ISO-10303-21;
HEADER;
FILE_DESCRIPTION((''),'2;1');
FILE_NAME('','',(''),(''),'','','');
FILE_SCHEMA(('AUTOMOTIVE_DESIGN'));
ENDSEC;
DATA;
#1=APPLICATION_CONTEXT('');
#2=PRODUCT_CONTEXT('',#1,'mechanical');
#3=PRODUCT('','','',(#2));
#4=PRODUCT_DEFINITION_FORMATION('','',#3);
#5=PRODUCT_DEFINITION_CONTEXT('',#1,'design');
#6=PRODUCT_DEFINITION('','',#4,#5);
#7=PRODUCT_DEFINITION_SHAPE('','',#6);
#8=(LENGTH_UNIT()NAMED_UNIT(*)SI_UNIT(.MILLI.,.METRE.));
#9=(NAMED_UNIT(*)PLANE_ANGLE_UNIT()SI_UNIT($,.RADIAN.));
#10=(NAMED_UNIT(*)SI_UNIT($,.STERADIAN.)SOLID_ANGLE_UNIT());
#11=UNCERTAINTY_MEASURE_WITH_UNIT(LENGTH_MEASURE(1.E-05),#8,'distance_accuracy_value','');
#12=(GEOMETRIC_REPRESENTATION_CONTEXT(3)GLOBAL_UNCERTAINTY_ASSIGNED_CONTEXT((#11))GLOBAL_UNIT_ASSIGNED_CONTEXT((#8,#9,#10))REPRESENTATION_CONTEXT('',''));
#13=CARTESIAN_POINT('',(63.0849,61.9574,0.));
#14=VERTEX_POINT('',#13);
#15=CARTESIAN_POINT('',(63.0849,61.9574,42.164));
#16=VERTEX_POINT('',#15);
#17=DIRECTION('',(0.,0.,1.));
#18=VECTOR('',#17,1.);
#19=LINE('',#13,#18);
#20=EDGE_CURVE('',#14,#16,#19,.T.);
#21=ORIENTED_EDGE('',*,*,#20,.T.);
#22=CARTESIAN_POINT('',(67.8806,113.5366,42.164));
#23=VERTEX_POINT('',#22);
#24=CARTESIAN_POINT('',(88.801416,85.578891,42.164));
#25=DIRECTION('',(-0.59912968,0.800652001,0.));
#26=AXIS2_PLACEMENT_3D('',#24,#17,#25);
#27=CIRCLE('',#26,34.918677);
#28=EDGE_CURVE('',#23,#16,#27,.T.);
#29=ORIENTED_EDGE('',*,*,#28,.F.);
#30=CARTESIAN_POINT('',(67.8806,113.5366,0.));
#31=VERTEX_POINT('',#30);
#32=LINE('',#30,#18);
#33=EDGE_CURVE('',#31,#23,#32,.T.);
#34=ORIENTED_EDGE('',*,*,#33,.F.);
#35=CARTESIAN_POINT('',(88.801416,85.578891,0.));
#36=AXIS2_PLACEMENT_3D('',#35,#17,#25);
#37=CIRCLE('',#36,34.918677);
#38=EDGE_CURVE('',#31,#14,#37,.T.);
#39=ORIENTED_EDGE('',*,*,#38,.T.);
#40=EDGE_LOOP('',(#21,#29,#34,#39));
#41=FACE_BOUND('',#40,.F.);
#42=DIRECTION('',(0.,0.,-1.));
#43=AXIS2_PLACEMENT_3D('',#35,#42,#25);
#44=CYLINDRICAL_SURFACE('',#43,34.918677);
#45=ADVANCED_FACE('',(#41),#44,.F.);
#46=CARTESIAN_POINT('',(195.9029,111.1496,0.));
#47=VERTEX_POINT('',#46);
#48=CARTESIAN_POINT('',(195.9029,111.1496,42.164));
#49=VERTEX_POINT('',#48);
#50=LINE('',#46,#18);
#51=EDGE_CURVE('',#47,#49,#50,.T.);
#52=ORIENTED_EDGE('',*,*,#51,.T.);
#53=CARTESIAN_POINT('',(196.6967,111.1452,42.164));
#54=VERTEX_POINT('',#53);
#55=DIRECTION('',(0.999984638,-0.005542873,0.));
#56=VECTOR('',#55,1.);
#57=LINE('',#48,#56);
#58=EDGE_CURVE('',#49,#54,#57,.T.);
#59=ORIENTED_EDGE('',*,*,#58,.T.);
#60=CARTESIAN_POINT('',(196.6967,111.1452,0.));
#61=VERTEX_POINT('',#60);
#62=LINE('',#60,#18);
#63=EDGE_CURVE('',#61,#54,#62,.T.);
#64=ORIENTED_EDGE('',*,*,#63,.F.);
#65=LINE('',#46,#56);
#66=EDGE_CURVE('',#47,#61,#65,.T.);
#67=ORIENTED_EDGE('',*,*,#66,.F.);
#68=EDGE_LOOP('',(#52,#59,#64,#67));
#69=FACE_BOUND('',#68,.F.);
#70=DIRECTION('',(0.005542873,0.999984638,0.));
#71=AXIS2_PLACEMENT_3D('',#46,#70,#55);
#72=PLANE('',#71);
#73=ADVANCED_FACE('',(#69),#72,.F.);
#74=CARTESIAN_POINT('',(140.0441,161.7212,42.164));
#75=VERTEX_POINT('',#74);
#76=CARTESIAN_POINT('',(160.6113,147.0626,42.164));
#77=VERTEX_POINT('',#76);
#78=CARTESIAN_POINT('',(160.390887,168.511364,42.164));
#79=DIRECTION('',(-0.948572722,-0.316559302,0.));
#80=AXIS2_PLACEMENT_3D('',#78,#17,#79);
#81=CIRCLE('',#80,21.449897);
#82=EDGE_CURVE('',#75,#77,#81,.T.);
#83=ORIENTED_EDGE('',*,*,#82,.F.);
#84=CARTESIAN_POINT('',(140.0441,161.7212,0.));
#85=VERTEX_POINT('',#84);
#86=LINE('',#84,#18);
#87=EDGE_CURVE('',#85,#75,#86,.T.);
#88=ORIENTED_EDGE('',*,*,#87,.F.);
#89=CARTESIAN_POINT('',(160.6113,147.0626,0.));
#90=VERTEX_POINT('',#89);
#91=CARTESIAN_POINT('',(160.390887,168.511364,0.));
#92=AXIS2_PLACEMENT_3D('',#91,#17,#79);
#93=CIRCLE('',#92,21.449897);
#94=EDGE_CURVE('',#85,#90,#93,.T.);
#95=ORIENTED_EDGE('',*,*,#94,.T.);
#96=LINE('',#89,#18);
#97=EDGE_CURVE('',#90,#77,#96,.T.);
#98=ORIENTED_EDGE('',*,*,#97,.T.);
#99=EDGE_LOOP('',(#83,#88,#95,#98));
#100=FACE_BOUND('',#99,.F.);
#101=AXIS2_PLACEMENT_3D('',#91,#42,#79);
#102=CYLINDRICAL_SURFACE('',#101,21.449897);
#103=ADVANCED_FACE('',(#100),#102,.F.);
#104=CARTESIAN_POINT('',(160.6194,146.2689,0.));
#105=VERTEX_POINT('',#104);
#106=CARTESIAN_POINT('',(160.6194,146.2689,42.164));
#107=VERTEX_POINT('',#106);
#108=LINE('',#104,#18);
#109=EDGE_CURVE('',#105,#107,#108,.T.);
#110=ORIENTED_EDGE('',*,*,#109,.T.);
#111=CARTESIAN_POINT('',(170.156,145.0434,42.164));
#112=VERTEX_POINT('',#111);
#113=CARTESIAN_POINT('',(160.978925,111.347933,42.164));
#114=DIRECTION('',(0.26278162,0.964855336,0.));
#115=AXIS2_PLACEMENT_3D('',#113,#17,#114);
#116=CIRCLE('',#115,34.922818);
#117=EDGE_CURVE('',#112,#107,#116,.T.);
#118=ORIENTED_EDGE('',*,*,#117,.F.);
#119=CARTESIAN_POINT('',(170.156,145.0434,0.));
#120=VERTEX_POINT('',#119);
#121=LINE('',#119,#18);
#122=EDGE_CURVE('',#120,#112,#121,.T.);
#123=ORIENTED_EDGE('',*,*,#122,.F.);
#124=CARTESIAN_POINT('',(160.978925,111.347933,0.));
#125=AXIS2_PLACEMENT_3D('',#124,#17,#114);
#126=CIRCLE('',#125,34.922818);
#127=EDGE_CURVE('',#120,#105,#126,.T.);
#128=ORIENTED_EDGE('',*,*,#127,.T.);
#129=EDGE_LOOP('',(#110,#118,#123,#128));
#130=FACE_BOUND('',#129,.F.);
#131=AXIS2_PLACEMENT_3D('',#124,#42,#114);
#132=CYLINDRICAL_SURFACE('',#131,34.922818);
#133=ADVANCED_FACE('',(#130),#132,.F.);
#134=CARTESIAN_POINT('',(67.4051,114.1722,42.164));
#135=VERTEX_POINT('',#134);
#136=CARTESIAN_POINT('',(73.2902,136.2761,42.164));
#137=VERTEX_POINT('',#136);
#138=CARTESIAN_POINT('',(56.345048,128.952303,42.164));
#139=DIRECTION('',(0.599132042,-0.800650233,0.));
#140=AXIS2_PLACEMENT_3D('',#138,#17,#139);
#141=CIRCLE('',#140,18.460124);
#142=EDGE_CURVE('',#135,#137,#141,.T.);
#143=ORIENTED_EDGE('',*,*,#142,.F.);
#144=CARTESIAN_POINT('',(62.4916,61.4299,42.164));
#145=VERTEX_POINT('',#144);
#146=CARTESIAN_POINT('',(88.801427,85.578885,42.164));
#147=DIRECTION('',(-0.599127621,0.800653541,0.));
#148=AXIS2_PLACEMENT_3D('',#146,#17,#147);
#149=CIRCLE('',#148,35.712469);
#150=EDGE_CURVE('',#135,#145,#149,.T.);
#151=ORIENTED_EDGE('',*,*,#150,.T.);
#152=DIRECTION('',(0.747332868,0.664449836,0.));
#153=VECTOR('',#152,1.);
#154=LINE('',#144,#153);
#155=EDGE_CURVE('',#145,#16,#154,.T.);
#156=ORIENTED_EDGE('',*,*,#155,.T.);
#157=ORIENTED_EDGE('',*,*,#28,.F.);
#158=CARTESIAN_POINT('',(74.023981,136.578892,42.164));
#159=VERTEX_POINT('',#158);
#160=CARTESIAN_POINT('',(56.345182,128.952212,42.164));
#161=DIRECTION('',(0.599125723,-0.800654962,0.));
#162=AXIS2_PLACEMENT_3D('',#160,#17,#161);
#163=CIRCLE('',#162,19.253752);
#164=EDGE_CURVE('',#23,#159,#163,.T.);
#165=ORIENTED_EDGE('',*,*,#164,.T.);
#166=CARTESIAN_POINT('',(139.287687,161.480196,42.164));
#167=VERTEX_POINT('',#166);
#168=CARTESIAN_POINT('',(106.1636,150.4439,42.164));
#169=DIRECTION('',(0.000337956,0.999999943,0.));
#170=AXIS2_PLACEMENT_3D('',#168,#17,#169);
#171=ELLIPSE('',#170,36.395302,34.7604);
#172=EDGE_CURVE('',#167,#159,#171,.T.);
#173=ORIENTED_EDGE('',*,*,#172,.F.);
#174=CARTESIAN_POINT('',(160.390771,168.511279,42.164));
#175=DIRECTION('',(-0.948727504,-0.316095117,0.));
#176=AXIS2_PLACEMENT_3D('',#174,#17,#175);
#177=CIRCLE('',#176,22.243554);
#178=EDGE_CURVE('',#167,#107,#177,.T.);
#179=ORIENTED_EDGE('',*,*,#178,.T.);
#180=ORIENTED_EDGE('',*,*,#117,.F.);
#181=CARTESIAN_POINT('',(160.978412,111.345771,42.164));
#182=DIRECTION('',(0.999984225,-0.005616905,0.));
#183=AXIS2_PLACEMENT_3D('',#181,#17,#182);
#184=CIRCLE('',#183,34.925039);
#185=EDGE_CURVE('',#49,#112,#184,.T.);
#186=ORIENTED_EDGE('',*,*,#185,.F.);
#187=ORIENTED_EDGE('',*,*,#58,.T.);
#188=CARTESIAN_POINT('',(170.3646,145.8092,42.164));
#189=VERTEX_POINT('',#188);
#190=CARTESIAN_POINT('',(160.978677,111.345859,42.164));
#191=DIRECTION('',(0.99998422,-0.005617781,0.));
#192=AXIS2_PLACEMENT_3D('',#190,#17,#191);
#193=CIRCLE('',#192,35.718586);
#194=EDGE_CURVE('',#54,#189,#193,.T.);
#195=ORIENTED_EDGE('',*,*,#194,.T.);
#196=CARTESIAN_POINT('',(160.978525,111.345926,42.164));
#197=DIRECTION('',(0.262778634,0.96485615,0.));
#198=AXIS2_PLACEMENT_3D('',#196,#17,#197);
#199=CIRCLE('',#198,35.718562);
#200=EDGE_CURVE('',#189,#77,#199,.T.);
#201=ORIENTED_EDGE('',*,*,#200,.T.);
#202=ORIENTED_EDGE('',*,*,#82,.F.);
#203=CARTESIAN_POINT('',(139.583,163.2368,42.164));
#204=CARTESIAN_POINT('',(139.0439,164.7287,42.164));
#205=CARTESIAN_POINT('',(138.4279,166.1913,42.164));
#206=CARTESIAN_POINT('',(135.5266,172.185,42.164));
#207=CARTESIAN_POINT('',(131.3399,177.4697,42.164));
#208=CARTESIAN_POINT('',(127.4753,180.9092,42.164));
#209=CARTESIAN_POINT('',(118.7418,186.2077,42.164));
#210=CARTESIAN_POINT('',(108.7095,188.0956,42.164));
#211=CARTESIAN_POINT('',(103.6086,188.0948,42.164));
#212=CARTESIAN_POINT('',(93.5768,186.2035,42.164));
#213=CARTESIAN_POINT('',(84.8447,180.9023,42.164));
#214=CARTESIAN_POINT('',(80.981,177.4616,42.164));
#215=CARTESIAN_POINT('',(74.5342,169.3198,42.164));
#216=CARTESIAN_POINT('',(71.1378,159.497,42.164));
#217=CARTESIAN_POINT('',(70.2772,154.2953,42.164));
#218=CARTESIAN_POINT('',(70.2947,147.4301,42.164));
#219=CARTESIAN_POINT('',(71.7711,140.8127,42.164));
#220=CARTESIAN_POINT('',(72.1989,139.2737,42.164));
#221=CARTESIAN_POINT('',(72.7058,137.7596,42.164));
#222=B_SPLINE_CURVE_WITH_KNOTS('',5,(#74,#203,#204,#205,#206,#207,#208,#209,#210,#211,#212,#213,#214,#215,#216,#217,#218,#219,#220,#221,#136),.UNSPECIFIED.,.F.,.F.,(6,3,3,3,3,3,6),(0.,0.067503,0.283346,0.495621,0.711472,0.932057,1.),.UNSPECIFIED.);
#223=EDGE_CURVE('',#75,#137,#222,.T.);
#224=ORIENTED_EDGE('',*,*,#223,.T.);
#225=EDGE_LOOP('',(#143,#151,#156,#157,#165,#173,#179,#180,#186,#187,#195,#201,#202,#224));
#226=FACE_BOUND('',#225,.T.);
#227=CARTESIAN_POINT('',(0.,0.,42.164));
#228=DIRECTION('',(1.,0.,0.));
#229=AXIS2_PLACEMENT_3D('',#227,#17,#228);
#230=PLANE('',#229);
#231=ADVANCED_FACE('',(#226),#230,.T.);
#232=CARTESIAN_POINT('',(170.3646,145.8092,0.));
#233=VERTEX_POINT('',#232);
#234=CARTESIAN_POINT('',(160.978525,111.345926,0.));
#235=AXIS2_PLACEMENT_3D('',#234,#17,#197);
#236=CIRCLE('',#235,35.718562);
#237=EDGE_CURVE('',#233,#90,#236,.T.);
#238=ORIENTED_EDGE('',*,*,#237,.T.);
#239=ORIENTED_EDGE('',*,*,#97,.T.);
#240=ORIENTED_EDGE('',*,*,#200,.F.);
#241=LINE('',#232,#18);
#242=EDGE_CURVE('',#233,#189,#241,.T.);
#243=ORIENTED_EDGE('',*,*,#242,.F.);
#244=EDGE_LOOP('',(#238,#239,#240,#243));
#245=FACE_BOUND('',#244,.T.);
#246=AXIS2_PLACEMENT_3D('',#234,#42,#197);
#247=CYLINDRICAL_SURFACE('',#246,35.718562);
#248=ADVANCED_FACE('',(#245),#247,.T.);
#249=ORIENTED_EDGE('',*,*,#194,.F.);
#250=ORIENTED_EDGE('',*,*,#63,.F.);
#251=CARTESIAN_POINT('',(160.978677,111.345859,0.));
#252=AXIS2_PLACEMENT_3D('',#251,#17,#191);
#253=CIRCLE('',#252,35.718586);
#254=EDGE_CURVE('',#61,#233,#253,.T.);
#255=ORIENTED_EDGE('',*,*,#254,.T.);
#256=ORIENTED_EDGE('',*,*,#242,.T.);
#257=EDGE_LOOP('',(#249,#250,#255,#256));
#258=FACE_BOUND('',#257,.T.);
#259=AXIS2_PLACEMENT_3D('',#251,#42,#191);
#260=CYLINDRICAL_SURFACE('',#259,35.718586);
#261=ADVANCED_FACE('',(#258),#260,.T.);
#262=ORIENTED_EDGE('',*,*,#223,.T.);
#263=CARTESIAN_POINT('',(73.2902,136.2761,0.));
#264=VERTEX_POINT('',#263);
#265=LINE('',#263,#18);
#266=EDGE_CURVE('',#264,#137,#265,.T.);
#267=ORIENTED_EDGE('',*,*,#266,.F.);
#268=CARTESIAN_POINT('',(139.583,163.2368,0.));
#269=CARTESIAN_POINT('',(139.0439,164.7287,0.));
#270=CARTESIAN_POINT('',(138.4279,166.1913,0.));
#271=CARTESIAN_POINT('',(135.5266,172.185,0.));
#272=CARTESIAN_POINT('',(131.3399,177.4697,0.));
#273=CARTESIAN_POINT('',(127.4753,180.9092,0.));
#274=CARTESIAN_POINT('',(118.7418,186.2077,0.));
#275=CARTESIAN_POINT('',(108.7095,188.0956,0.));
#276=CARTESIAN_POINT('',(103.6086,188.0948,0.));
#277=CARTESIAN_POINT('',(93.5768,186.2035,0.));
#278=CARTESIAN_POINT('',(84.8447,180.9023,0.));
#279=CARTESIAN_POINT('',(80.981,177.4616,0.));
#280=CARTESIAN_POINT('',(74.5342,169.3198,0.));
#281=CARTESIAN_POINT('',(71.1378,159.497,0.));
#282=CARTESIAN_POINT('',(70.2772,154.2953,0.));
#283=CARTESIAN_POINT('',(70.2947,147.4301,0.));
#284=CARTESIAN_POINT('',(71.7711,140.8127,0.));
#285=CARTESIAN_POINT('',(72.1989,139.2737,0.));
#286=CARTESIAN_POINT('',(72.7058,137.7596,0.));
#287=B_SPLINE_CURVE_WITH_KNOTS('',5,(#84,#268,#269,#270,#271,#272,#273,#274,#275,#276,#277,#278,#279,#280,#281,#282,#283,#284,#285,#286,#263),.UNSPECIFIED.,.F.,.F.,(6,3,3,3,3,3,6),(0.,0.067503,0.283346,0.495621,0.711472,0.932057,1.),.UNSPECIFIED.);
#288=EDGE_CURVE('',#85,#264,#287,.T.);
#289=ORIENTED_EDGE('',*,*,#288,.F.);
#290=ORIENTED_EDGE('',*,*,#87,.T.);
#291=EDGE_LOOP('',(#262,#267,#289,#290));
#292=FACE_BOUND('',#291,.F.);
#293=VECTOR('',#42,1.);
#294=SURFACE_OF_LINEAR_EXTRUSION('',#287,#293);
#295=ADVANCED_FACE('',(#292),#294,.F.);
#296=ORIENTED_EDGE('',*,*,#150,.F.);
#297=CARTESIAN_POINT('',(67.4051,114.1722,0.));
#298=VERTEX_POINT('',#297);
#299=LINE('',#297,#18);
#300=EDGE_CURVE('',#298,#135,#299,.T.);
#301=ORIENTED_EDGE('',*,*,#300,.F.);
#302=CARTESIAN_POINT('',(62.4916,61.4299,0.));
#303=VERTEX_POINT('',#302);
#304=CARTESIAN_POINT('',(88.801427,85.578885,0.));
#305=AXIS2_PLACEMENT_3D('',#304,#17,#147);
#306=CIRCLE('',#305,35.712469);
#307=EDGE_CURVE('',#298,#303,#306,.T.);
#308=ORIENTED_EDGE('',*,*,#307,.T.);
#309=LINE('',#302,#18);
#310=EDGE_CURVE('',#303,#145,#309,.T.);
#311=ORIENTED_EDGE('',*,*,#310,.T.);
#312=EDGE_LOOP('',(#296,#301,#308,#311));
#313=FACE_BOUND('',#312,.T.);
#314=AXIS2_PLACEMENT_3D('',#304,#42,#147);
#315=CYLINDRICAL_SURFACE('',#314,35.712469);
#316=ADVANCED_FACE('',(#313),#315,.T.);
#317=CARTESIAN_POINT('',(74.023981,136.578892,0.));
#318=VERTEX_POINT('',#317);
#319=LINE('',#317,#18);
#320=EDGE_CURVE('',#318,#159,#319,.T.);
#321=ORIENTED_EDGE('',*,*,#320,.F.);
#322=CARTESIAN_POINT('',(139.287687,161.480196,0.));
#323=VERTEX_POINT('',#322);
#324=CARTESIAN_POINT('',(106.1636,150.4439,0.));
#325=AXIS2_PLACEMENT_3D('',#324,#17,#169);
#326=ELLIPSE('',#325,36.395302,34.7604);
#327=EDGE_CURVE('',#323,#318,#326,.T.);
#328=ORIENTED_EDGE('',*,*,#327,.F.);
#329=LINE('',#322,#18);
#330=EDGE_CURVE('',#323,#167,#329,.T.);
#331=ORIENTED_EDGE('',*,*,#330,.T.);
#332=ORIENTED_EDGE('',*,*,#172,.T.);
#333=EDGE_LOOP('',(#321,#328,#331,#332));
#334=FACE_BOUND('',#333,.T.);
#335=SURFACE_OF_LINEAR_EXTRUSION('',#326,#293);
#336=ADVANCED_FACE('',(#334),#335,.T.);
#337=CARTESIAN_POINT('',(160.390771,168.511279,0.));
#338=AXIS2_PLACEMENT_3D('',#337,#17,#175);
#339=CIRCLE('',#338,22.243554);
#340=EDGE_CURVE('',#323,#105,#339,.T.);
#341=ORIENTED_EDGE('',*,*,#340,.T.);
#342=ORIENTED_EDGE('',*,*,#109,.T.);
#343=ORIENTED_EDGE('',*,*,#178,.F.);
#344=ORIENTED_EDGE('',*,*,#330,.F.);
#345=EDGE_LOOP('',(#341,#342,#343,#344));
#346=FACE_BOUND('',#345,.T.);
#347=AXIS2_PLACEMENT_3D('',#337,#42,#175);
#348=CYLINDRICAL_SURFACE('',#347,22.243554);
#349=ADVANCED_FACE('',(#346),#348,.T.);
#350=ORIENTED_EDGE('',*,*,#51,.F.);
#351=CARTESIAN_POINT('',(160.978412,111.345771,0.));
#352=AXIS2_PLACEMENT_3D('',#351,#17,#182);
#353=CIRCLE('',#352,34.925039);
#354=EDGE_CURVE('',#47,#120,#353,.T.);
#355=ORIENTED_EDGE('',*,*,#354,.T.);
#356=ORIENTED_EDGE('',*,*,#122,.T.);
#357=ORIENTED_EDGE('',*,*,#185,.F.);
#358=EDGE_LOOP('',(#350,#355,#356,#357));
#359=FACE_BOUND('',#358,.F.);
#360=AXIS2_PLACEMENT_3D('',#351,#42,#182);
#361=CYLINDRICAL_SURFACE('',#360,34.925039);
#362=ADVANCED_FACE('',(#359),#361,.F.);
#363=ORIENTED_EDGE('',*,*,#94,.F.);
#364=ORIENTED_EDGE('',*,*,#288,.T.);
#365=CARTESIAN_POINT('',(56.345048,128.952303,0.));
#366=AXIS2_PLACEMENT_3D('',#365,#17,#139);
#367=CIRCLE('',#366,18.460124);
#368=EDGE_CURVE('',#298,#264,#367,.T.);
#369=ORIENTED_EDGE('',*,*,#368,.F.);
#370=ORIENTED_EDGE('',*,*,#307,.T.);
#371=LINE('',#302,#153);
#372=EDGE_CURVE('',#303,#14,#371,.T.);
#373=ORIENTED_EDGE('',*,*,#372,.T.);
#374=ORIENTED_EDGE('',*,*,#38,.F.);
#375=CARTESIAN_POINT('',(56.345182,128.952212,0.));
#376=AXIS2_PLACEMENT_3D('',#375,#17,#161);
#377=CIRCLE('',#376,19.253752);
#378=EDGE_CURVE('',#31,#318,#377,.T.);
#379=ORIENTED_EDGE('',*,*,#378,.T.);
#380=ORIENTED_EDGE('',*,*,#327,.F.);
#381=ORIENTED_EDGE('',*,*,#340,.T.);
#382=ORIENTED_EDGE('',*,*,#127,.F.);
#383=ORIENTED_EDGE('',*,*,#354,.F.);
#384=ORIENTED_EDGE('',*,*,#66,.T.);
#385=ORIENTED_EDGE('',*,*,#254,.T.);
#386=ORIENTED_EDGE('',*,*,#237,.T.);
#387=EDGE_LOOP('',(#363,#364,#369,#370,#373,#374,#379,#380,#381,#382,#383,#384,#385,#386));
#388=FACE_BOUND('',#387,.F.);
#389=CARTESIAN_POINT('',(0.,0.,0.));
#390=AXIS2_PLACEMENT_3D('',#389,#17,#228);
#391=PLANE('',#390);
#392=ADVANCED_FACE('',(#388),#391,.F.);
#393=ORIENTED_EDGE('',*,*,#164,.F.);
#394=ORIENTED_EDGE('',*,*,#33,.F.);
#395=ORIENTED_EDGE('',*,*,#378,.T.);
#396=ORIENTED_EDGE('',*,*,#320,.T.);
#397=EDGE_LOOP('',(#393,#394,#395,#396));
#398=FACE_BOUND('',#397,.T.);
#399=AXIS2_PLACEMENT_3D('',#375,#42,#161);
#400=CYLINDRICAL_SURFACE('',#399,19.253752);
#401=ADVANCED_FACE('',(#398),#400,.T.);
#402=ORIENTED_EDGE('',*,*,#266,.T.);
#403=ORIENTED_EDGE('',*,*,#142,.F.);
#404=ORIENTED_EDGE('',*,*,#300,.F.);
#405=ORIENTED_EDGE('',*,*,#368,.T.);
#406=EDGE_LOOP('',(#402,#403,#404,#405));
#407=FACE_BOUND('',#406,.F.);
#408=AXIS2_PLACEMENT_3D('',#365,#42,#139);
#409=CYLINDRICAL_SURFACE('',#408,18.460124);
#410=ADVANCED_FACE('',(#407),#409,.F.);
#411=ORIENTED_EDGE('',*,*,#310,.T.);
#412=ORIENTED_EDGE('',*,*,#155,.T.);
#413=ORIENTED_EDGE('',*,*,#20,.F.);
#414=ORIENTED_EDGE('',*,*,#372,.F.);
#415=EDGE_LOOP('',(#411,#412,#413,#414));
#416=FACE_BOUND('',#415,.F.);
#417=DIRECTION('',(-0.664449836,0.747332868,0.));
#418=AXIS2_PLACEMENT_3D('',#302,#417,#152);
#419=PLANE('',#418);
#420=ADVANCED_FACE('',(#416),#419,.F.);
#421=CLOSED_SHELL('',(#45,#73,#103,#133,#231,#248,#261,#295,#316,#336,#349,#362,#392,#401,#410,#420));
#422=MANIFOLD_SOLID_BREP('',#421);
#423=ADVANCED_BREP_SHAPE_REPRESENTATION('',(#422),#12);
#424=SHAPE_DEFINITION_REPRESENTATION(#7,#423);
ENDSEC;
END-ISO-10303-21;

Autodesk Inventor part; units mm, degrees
ref_plane "YZ Plane" through (0, 0, 0) normal (1, 0, 0) x (0, 1, 0)
ref_plane "XZ Plane" through (0, 0, 0) normal (0, 1, 0) x (-1, 0, 0)
ref_plane "XY Plane" through (0, 0, 0) normal (0, 0, 1) x (1, 0, 0)
sketch "Sketch1" plane through (0, 0, 0) normal (0, 0, 1) x (1, 0, 0)
  arc A0 (67.8806, 113.5366) -> (74.024, 136.5789) centre (56.3452, 128.9522) ccw
  line L0 (63.0849, 61.9574) -> (112.0151, 5.0878) construction
  arc A1 (67.8806, 113.5366) -> (63.0849, 61.9574) centre (88.8014, 85.5789) ccw
  arc A2 (139.2877, 161.4802) -> (160.6194, 146.2689) centre (160.3908, 168.5113) ccw
  arc A3 (170.156, 145.0434) -> (160.6194, 146.2689) centre (160.9785, 111.3458) ccw
  line L1 (195.9029, 111.1496) -> (195.4212, 25.3733) construction
  ellipse E0 centre (106.1636, 150.4439) end of major axis (106.1759, 186.8392) minor radius 34.7604 (139.2877, 161.4802) -> (74.024, 136.5789) ccw
  arc A4 (112.0151, 5.0878) -> (112.3757, 4.7043) centre (116.5302, 8.9726) ccw
  arc A5 (112.3757, 4.7043) -> (195.1395, 23.7862) centre (147.6111, 40.9044) ccw construction
  arc A6 (195.1395, 23.7862) -> (195.4212, 25.3733) centre (190.6588, 25.4) ccw construction
  arc A7 (195.9029, 111.1496) -> (170.156, 145.0434) centre (160.9785, 111.3458) ccw
  arc A8 (67.4051, 114.1722) -> (73.2902, 136.2761) centre (56.3452, 128.9522) ccw
  arc A9 (67.4051, 114.1722) -> (62.4916, 61.4299) centre (88.8014, 85.5789) ccw
  line L2 (62.4916, 61.4299) -> (111.4134, 4.5701) construction
  arc A10 (111.4134, 4.5701) -> (111.8221, 4.1355) centre (116.5302, 8.9726) ccw construction
  arc A11 (111.8221, 4.1355) -> (195.8863, 23.5172) centre (147.6111, 40.9044) ccw construction
  arc A12 (195.8863, 23.5172) -> (196.2149, 25.3688) centre (190.6588, 25.4) ccw construction
  line L3 (196.2149, 25.3688) -> (196.6967, 111.1452) construction
  arc A13 (196.6967, 111.1452) -> (170.3646, 145.8092) centre (160.9785, 111.3458) ccw
  arc A14 (170.3646, 145.8092) -> (160.6113, 147.0626) centre (160.9785, 111.3458) ccw
  arc A15 (140.0441, 161.7212) -> (160.6113, 147.0626) centre (160.3908, 168.5113) ccw
  line L4 (62.4916, 61.4299) -> (63.0849, 61.9574)
  line L5 (195.9029, 111.1496) -> (196.6967, 111.1452)
  spline S0 degree 5 poles (140.0441, 161.7212) (139.583, 163.2368) (139.0439, 164.7287) (138.4279, 166.1913) (135.5266, 172.185) (131.3399, 177.4697) (127.4753, 180.9092) (118.7418, 186.2077) (108.7095, 188.0956) (103.6086, 188.0948) (93.5768, 186.2035) (84.8447, 180.9023) (80.981, 177.4616) (74.5342, 169.3198) (71.1378, 159.497) (70.2772, 154.2953) (70.2947, 147.4301) (71.7711, 140.8127) (72.1989, 139.2737) (72.7058, 137.7596) (73.2902, 136.2761) knots 0 0 0 0 0 0 0.067503 0.067503 0.067503 0.283346 0.283346 0.283346 0.495621 0.495621 0.495621 0.711472 0.711472 0.711472 0.932057 0.932057 0.932057 1 1 1 1 1 1
  point P0 (0, 0)
  point P1 (93.6139, 184.384)
  point P2 (71.7596, 145.2447)
  point P3 (61.2825, 107.0736)
  point P4 (135.0639, 170.6681)
  point P5 (195.5971, 56.6944)
  point P6 (88.1705, 44.9716)
  dimension "d27" = 0.7937
extrude "Extrusion1" add sketch "Sketch1" along normal blind 42.164
properties part number "Sheild"
